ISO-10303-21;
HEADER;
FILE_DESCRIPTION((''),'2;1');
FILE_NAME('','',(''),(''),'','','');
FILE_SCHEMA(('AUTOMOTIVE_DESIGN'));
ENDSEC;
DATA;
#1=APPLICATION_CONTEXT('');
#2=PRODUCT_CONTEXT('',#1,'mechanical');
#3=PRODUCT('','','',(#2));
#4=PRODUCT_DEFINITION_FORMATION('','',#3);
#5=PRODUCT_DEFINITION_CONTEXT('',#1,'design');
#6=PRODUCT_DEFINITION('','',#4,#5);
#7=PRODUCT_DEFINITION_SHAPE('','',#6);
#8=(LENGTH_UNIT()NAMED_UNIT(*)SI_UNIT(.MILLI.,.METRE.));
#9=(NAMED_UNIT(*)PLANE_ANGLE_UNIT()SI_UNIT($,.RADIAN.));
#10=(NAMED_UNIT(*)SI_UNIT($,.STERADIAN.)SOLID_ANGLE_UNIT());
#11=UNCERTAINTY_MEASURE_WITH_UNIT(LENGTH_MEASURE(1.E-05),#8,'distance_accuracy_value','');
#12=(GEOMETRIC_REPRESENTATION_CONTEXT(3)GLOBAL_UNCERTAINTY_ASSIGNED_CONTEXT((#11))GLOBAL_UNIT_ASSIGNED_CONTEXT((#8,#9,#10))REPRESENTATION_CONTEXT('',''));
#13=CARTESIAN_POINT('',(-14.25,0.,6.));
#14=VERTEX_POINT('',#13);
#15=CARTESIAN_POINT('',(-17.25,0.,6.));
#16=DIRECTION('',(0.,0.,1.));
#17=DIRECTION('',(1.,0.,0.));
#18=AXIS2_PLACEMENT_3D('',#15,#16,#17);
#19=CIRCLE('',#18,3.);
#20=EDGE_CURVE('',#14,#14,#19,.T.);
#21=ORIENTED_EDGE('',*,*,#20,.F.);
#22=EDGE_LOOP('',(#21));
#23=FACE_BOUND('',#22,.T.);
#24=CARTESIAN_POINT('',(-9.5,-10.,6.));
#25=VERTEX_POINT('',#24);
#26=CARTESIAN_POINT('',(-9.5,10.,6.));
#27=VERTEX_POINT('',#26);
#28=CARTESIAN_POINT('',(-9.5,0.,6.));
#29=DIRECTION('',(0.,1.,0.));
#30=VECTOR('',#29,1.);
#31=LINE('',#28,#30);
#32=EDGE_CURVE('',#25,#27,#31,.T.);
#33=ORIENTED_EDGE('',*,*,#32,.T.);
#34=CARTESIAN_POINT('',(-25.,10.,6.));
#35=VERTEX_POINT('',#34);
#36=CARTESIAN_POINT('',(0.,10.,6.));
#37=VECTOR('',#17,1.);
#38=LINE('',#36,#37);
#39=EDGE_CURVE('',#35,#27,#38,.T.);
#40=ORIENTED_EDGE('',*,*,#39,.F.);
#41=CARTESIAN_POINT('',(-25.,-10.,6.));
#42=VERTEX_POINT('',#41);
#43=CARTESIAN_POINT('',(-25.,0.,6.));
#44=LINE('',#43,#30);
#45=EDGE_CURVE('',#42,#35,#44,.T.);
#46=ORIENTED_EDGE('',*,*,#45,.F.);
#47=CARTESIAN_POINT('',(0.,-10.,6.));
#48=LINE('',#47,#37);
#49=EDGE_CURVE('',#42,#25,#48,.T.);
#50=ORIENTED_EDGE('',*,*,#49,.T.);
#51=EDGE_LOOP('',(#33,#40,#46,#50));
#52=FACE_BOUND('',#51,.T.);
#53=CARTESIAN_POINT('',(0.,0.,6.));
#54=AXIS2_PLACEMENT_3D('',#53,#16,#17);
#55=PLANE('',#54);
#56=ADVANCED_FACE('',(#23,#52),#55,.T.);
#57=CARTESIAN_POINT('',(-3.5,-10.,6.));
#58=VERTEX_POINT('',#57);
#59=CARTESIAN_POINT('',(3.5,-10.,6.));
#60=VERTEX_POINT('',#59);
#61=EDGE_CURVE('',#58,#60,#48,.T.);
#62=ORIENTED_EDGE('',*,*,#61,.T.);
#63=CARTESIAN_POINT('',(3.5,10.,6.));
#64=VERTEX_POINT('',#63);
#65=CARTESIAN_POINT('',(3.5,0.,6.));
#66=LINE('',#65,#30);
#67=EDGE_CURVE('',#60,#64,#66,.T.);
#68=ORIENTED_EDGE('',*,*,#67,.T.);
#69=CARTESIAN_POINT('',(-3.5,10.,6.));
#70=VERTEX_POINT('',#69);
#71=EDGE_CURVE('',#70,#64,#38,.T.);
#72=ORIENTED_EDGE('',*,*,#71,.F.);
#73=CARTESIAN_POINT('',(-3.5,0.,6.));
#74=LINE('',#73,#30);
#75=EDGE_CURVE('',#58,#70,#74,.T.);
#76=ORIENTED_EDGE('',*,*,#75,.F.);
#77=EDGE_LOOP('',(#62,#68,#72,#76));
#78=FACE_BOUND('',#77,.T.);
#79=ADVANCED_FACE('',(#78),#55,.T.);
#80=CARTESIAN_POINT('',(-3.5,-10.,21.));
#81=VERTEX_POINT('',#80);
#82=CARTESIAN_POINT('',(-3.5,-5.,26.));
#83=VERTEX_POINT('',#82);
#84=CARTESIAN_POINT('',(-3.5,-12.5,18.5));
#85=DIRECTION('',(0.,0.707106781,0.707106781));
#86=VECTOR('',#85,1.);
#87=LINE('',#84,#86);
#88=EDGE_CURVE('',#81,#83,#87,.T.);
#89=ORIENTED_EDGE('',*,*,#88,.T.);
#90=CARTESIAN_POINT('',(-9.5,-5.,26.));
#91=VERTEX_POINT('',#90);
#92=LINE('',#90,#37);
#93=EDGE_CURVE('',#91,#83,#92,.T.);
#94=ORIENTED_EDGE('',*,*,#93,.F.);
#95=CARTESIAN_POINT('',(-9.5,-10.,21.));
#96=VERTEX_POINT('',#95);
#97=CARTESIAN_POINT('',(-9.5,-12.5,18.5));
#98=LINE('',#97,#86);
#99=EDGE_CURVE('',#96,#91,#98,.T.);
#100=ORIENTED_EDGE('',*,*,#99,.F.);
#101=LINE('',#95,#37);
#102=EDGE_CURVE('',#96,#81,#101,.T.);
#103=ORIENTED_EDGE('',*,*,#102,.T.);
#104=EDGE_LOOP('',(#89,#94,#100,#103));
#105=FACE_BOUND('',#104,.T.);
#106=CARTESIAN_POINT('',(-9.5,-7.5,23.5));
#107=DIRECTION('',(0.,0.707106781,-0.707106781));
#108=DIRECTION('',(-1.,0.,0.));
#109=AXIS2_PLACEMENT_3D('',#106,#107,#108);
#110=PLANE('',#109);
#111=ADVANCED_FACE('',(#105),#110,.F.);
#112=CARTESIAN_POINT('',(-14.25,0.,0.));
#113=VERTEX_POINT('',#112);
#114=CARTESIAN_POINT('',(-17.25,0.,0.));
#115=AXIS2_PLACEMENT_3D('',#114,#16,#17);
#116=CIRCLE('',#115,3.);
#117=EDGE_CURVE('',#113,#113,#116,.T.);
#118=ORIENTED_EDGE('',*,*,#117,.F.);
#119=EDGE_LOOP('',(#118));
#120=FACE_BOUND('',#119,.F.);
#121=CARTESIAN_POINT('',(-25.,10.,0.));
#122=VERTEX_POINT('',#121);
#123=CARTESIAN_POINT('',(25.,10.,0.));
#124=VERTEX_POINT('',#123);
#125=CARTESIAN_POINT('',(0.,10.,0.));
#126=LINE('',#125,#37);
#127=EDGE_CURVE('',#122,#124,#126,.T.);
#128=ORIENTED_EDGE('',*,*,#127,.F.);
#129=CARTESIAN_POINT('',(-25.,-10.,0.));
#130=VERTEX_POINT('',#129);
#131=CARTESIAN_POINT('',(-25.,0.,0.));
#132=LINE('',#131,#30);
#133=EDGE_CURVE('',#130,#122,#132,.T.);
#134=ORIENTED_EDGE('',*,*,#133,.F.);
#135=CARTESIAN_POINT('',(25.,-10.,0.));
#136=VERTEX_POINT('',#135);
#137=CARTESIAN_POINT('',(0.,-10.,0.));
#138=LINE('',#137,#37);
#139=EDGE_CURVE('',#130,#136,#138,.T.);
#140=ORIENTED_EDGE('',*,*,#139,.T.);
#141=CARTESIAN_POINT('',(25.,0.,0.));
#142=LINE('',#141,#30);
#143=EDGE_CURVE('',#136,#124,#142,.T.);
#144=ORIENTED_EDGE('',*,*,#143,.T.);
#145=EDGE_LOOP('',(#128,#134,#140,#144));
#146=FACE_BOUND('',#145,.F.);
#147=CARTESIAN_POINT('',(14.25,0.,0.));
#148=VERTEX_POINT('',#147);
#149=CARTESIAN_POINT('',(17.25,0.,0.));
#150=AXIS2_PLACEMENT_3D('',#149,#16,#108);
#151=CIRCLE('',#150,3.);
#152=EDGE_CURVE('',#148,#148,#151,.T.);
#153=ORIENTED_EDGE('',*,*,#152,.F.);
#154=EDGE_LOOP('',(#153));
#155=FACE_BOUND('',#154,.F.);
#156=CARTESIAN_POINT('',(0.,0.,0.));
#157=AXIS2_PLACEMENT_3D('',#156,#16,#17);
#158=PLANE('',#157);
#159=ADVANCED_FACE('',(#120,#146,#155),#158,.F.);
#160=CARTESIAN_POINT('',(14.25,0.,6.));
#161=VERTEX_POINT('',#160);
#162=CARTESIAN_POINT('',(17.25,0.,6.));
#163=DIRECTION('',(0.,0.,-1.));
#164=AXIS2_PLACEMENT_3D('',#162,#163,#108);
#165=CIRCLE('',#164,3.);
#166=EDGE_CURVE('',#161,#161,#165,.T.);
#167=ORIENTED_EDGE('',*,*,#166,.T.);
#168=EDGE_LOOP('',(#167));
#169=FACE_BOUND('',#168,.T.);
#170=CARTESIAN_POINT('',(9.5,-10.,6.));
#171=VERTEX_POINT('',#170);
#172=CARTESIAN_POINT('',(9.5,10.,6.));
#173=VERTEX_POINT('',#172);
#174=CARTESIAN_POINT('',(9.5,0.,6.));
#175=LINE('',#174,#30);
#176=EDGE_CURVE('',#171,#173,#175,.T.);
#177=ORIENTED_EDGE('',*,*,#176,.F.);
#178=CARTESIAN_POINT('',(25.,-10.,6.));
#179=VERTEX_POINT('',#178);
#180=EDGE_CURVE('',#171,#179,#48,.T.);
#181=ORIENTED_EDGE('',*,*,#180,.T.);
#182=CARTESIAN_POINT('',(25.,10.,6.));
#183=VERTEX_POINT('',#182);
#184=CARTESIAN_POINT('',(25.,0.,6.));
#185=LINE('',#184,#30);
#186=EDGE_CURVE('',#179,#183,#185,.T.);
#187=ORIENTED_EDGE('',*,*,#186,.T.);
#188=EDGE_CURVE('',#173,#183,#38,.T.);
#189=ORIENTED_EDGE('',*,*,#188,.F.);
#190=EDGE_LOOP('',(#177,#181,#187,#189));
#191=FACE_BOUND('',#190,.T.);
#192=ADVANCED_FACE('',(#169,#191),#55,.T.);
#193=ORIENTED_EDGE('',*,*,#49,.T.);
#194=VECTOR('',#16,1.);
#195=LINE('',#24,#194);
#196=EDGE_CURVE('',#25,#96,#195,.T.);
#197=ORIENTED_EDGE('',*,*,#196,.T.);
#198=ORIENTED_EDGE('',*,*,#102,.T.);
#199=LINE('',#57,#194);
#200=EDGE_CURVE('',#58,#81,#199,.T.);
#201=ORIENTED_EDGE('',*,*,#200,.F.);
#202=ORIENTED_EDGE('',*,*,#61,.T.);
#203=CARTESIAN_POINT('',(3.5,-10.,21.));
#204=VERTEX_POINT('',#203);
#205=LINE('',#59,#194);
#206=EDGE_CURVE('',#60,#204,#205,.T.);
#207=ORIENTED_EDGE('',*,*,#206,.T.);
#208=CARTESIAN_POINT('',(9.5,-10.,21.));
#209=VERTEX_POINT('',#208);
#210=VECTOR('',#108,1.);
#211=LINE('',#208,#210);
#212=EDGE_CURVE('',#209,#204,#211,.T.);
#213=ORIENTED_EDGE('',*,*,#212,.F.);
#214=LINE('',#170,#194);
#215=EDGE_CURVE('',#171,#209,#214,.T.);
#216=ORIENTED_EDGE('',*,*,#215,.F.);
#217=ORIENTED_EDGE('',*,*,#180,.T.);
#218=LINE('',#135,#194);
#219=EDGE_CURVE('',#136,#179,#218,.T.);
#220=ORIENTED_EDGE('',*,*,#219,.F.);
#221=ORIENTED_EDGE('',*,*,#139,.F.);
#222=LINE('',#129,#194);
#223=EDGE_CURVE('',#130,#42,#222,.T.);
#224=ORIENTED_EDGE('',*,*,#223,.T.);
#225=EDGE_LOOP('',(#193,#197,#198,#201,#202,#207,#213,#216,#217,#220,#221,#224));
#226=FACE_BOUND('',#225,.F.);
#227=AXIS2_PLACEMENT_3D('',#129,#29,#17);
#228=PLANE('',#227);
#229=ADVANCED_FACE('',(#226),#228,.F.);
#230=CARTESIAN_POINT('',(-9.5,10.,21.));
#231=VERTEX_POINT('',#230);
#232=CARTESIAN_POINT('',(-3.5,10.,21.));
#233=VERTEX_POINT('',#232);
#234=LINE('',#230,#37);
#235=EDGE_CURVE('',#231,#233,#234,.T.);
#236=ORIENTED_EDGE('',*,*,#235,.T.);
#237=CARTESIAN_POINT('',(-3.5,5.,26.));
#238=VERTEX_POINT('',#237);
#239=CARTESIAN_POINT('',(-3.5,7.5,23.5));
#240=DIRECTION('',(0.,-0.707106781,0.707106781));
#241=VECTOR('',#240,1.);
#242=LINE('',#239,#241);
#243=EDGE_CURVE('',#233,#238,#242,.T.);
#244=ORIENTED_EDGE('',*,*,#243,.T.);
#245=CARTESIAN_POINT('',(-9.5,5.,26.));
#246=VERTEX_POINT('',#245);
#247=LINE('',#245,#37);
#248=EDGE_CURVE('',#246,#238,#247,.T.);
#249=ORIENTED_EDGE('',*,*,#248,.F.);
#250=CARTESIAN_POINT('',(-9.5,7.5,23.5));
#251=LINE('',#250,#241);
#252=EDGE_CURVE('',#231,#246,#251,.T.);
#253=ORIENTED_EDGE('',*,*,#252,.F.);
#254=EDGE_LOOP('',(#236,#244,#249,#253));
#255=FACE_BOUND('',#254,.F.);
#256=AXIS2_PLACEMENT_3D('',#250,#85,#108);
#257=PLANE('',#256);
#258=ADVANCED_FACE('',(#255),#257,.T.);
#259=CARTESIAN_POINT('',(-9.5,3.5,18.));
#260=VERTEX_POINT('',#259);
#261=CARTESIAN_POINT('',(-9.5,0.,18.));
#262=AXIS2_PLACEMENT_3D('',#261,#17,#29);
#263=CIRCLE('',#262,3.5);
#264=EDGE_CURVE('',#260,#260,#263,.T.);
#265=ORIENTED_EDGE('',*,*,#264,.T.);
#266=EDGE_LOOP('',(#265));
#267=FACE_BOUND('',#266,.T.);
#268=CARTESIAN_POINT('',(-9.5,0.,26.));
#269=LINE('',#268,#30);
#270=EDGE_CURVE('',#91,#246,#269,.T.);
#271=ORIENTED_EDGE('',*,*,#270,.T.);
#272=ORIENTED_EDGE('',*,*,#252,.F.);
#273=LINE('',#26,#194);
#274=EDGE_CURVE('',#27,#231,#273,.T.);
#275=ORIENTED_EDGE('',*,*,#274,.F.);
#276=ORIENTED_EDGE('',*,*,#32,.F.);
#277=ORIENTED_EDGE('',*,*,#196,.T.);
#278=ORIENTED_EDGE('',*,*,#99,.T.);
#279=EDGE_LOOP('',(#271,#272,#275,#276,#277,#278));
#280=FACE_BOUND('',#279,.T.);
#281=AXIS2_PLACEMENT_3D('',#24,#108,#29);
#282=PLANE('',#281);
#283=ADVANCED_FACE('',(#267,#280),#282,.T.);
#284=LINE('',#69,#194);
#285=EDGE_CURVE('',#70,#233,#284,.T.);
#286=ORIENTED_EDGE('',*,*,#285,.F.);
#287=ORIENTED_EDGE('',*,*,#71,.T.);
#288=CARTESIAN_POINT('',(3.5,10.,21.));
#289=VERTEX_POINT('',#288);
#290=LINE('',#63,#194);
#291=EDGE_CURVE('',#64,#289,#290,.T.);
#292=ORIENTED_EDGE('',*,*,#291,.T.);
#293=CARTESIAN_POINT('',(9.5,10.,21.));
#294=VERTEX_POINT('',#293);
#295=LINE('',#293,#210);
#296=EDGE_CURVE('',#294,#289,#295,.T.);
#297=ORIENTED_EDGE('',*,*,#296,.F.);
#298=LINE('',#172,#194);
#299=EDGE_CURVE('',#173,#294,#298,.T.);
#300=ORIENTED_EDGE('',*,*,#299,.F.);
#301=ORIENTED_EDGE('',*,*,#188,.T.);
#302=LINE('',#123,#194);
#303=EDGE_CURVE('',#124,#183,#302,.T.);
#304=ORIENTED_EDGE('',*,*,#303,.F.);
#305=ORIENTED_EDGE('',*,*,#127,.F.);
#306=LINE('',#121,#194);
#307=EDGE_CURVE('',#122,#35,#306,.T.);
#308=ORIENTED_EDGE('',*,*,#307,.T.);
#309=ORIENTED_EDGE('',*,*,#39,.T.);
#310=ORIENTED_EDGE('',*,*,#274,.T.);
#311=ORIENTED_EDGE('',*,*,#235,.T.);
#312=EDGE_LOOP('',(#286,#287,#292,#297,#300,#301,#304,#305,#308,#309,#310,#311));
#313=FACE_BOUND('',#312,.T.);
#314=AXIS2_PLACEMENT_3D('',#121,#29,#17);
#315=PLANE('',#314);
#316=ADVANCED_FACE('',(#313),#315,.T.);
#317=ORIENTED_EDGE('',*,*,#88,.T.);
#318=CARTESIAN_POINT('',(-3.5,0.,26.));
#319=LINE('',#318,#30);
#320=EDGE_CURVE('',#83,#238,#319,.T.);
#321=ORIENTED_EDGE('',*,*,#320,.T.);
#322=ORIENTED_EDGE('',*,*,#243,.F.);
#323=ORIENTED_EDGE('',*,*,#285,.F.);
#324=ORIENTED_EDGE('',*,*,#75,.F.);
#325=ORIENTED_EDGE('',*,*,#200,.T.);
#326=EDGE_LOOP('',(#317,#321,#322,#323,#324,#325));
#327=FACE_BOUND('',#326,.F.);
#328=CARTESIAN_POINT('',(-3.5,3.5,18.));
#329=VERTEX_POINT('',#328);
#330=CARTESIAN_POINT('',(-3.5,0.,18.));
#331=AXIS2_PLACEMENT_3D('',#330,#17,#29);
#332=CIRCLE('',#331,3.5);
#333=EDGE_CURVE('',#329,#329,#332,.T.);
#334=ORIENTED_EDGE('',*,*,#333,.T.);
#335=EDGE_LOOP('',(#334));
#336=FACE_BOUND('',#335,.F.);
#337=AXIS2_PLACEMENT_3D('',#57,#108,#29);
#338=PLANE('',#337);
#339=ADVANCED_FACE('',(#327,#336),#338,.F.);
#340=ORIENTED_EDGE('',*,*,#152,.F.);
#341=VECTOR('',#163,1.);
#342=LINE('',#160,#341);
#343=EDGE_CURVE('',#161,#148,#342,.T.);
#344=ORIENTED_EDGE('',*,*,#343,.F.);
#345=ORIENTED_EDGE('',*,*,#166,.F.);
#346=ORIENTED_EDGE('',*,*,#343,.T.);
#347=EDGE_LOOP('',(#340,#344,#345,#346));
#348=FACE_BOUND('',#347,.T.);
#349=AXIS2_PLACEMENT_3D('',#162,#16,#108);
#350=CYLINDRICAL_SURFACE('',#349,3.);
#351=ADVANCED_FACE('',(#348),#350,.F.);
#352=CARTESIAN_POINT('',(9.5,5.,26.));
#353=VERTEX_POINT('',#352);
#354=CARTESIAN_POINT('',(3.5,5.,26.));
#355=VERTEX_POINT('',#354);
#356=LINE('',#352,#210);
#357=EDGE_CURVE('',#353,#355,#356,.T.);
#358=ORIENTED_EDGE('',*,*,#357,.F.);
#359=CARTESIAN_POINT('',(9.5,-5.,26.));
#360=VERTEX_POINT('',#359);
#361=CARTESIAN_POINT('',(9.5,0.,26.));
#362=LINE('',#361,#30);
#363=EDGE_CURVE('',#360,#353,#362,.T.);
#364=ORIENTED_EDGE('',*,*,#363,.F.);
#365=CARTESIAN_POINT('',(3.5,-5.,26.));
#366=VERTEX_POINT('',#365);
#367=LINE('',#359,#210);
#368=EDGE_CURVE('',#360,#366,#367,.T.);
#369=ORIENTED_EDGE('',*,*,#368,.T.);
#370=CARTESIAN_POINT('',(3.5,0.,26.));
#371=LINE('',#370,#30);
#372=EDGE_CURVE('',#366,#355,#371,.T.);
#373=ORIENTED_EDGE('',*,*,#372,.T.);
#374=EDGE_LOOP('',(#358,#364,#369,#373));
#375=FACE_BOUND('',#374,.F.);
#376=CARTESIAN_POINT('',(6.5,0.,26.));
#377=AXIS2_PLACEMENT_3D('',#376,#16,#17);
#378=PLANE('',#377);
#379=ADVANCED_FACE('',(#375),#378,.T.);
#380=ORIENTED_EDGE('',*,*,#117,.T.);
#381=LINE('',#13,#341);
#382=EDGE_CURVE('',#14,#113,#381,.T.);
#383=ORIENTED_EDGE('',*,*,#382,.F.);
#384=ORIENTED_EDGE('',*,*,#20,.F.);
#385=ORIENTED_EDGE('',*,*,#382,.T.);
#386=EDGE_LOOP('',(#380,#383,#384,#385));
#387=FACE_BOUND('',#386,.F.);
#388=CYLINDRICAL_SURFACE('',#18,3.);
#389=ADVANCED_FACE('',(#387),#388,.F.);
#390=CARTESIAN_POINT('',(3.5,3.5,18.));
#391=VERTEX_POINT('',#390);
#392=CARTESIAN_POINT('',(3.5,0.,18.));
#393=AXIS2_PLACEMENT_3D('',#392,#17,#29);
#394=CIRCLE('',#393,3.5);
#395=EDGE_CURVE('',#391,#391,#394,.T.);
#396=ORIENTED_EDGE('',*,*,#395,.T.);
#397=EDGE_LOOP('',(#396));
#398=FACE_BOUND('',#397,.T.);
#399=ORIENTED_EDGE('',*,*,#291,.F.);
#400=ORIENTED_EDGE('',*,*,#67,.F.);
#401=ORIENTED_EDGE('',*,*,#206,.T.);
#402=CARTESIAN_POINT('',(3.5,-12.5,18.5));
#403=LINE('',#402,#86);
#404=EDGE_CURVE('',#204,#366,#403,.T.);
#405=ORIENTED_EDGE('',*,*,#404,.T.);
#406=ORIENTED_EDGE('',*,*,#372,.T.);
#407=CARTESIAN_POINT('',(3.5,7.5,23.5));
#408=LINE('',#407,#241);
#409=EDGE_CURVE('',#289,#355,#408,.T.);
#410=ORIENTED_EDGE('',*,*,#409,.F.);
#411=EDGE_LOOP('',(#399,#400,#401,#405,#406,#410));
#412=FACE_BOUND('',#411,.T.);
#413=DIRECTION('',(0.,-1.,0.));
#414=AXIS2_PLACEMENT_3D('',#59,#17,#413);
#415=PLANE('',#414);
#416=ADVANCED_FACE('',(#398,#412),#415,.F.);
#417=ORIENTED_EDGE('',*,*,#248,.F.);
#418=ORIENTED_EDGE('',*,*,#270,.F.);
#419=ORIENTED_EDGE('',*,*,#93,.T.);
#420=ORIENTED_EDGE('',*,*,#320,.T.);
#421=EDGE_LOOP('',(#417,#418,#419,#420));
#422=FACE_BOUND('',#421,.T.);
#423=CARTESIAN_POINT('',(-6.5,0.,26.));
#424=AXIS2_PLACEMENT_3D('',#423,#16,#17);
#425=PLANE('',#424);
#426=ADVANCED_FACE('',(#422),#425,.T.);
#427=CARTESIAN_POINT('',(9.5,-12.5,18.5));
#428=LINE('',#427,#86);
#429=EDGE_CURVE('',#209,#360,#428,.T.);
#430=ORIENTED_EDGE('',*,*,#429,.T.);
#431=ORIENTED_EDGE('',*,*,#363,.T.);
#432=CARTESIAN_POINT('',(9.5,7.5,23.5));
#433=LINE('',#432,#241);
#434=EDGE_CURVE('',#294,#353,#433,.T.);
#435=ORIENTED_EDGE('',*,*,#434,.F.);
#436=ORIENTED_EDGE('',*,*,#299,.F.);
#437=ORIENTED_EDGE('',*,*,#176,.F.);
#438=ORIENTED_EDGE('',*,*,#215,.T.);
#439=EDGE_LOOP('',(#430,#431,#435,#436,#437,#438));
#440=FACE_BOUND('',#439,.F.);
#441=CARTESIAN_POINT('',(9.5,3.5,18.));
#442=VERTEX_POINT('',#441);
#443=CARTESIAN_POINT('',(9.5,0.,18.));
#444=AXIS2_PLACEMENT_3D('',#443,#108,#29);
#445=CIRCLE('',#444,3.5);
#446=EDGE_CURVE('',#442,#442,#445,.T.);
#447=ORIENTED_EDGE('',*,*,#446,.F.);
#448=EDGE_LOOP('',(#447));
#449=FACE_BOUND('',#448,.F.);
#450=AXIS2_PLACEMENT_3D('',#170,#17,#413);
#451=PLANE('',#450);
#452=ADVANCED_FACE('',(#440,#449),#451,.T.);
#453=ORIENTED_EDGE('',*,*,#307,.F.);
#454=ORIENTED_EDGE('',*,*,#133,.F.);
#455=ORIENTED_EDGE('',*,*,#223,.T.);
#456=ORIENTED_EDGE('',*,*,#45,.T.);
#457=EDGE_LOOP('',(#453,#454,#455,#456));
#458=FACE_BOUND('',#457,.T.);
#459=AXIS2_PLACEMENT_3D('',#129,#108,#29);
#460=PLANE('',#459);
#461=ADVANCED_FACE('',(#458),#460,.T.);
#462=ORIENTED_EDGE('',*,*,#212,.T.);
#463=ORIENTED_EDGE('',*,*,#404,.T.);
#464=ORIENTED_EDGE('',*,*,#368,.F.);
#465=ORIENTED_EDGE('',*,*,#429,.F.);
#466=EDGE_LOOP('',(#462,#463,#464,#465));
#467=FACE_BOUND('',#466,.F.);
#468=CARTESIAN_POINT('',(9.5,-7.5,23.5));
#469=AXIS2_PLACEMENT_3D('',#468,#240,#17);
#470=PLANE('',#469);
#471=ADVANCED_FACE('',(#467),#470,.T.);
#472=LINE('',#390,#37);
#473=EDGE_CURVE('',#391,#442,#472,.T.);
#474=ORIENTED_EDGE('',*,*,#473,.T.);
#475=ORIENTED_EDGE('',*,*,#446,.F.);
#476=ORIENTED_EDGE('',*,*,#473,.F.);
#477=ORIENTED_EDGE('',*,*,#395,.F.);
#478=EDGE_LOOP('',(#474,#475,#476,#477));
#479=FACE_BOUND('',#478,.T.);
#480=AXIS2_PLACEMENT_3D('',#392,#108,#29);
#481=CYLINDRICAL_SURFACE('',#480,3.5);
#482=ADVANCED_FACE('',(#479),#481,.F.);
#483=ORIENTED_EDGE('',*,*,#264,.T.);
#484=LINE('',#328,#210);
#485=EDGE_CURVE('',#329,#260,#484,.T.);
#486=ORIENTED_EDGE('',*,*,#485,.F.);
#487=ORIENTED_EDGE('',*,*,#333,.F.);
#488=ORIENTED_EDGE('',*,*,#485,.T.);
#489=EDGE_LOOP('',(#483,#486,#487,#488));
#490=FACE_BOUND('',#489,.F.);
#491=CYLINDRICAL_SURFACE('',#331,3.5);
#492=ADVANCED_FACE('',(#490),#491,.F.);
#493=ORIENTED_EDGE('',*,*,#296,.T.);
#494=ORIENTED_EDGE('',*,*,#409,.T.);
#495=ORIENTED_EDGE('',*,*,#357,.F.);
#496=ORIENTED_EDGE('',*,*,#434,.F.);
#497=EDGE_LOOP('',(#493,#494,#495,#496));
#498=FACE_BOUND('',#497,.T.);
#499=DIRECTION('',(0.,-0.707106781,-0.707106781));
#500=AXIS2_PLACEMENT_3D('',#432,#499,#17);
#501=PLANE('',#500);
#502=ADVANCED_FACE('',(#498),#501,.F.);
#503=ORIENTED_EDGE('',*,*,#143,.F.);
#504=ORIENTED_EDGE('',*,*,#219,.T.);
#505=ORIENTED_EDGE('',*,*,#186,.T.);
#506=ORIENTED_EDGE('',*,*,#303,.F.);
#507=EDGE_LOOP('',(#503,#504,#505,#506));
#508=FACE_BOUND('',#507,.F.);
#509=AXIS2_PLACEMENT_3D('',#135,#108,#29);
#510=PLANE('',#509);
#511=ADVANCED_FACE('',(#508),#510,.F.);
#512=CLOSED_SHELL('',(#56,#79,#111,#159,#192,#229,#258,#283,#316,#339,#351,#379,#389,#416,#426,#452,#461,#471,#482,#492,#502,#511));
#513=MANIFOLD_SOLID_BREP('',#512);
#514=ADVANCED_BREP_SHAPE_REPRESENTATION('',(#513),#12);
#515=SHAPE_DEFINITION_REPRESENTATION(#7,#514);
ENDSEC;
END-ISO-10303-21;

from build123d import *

# Parameters (mm, degrees)
F0_W     = 50
F0_H     = 20
F1_DEPTH = 6
F2_W     = 6
F2_H     = 20
F3_DEPTH = 20
F4_R     = 3.5
F5_DEPTH = 25
F6_SIZE  = 5
F7_R     = 3
F8_DEPTH = 25


# Not quite as in the source:
# - a pattern or mirror of a feature is missing from the dataset's text; its kind, count and spacing are read off the source's solid


with BuildPart() as f1:
    # F0 (on Top) → F1 (new body)
    with BuildSketch(Plane.XY):
        Rectangle(F0_W, F0_H)
    extrude(amount=F1_DEPTH)

    # F2 (on face) → F3 (join)
    with BuildSketch(Plane.XY.offset(6)):
        with Locations((-6.5, 0)):
            Rectangle(F2_W, F2_H)
    f3 = extrude(amount=F3_DEPTH)

    # F3_copies: F3 across plane
    add(f3.mirror(Plane(origin=(0, 0, 0), x_dir=(0, 0, 1), z_dir=(1, 0, 0))))

    # F4 (on face) → F5 (cut)
    with BuildSketch(Plane.YZ.offset(-3.5)):
        with Locations((0, 18)):
            Circle(F4_R)
    f5 = extrude(amount=-F5_DEPTH, mode=Mode.SUBTRACT)

    # F5_copies: F5 across plane
    add(f5.mirror(Plane(origin=(0, 0, 0), x_dir=(0, 0, 1), z_dir=(1, 0, 0))), mode=Mode.SUBTRACT)

    # F6
    f6_edges = [f1.edges().sort_by_distance(p)[0] for p in [
        (-6.5, -10, 26),
        (-6.5, 10, 26),
        (6.5, -10, 26),
        (6.5, 10, 26),
    ]]
    chamfer(f6_edges, length=F6_SIZE)

    # F7 (on face) → F8 (cut)
    with BuildSketch(Plane.XY.offset(6)):
        with Locations((-17.25, 0)):
            Circle(F7_R)
    f8 = extrude(amount=-F8_DEPTH, mode=Mode.SUBTRACT)

    # F8_copies: F8 across plane
    add(f8.mirror(Plane(origin=(0, 0, 0), x_dir=(0, 0, 1), z_dir=(1, 0, 0))), mode=Mode.SUBTRACT)


solid = f1.part
